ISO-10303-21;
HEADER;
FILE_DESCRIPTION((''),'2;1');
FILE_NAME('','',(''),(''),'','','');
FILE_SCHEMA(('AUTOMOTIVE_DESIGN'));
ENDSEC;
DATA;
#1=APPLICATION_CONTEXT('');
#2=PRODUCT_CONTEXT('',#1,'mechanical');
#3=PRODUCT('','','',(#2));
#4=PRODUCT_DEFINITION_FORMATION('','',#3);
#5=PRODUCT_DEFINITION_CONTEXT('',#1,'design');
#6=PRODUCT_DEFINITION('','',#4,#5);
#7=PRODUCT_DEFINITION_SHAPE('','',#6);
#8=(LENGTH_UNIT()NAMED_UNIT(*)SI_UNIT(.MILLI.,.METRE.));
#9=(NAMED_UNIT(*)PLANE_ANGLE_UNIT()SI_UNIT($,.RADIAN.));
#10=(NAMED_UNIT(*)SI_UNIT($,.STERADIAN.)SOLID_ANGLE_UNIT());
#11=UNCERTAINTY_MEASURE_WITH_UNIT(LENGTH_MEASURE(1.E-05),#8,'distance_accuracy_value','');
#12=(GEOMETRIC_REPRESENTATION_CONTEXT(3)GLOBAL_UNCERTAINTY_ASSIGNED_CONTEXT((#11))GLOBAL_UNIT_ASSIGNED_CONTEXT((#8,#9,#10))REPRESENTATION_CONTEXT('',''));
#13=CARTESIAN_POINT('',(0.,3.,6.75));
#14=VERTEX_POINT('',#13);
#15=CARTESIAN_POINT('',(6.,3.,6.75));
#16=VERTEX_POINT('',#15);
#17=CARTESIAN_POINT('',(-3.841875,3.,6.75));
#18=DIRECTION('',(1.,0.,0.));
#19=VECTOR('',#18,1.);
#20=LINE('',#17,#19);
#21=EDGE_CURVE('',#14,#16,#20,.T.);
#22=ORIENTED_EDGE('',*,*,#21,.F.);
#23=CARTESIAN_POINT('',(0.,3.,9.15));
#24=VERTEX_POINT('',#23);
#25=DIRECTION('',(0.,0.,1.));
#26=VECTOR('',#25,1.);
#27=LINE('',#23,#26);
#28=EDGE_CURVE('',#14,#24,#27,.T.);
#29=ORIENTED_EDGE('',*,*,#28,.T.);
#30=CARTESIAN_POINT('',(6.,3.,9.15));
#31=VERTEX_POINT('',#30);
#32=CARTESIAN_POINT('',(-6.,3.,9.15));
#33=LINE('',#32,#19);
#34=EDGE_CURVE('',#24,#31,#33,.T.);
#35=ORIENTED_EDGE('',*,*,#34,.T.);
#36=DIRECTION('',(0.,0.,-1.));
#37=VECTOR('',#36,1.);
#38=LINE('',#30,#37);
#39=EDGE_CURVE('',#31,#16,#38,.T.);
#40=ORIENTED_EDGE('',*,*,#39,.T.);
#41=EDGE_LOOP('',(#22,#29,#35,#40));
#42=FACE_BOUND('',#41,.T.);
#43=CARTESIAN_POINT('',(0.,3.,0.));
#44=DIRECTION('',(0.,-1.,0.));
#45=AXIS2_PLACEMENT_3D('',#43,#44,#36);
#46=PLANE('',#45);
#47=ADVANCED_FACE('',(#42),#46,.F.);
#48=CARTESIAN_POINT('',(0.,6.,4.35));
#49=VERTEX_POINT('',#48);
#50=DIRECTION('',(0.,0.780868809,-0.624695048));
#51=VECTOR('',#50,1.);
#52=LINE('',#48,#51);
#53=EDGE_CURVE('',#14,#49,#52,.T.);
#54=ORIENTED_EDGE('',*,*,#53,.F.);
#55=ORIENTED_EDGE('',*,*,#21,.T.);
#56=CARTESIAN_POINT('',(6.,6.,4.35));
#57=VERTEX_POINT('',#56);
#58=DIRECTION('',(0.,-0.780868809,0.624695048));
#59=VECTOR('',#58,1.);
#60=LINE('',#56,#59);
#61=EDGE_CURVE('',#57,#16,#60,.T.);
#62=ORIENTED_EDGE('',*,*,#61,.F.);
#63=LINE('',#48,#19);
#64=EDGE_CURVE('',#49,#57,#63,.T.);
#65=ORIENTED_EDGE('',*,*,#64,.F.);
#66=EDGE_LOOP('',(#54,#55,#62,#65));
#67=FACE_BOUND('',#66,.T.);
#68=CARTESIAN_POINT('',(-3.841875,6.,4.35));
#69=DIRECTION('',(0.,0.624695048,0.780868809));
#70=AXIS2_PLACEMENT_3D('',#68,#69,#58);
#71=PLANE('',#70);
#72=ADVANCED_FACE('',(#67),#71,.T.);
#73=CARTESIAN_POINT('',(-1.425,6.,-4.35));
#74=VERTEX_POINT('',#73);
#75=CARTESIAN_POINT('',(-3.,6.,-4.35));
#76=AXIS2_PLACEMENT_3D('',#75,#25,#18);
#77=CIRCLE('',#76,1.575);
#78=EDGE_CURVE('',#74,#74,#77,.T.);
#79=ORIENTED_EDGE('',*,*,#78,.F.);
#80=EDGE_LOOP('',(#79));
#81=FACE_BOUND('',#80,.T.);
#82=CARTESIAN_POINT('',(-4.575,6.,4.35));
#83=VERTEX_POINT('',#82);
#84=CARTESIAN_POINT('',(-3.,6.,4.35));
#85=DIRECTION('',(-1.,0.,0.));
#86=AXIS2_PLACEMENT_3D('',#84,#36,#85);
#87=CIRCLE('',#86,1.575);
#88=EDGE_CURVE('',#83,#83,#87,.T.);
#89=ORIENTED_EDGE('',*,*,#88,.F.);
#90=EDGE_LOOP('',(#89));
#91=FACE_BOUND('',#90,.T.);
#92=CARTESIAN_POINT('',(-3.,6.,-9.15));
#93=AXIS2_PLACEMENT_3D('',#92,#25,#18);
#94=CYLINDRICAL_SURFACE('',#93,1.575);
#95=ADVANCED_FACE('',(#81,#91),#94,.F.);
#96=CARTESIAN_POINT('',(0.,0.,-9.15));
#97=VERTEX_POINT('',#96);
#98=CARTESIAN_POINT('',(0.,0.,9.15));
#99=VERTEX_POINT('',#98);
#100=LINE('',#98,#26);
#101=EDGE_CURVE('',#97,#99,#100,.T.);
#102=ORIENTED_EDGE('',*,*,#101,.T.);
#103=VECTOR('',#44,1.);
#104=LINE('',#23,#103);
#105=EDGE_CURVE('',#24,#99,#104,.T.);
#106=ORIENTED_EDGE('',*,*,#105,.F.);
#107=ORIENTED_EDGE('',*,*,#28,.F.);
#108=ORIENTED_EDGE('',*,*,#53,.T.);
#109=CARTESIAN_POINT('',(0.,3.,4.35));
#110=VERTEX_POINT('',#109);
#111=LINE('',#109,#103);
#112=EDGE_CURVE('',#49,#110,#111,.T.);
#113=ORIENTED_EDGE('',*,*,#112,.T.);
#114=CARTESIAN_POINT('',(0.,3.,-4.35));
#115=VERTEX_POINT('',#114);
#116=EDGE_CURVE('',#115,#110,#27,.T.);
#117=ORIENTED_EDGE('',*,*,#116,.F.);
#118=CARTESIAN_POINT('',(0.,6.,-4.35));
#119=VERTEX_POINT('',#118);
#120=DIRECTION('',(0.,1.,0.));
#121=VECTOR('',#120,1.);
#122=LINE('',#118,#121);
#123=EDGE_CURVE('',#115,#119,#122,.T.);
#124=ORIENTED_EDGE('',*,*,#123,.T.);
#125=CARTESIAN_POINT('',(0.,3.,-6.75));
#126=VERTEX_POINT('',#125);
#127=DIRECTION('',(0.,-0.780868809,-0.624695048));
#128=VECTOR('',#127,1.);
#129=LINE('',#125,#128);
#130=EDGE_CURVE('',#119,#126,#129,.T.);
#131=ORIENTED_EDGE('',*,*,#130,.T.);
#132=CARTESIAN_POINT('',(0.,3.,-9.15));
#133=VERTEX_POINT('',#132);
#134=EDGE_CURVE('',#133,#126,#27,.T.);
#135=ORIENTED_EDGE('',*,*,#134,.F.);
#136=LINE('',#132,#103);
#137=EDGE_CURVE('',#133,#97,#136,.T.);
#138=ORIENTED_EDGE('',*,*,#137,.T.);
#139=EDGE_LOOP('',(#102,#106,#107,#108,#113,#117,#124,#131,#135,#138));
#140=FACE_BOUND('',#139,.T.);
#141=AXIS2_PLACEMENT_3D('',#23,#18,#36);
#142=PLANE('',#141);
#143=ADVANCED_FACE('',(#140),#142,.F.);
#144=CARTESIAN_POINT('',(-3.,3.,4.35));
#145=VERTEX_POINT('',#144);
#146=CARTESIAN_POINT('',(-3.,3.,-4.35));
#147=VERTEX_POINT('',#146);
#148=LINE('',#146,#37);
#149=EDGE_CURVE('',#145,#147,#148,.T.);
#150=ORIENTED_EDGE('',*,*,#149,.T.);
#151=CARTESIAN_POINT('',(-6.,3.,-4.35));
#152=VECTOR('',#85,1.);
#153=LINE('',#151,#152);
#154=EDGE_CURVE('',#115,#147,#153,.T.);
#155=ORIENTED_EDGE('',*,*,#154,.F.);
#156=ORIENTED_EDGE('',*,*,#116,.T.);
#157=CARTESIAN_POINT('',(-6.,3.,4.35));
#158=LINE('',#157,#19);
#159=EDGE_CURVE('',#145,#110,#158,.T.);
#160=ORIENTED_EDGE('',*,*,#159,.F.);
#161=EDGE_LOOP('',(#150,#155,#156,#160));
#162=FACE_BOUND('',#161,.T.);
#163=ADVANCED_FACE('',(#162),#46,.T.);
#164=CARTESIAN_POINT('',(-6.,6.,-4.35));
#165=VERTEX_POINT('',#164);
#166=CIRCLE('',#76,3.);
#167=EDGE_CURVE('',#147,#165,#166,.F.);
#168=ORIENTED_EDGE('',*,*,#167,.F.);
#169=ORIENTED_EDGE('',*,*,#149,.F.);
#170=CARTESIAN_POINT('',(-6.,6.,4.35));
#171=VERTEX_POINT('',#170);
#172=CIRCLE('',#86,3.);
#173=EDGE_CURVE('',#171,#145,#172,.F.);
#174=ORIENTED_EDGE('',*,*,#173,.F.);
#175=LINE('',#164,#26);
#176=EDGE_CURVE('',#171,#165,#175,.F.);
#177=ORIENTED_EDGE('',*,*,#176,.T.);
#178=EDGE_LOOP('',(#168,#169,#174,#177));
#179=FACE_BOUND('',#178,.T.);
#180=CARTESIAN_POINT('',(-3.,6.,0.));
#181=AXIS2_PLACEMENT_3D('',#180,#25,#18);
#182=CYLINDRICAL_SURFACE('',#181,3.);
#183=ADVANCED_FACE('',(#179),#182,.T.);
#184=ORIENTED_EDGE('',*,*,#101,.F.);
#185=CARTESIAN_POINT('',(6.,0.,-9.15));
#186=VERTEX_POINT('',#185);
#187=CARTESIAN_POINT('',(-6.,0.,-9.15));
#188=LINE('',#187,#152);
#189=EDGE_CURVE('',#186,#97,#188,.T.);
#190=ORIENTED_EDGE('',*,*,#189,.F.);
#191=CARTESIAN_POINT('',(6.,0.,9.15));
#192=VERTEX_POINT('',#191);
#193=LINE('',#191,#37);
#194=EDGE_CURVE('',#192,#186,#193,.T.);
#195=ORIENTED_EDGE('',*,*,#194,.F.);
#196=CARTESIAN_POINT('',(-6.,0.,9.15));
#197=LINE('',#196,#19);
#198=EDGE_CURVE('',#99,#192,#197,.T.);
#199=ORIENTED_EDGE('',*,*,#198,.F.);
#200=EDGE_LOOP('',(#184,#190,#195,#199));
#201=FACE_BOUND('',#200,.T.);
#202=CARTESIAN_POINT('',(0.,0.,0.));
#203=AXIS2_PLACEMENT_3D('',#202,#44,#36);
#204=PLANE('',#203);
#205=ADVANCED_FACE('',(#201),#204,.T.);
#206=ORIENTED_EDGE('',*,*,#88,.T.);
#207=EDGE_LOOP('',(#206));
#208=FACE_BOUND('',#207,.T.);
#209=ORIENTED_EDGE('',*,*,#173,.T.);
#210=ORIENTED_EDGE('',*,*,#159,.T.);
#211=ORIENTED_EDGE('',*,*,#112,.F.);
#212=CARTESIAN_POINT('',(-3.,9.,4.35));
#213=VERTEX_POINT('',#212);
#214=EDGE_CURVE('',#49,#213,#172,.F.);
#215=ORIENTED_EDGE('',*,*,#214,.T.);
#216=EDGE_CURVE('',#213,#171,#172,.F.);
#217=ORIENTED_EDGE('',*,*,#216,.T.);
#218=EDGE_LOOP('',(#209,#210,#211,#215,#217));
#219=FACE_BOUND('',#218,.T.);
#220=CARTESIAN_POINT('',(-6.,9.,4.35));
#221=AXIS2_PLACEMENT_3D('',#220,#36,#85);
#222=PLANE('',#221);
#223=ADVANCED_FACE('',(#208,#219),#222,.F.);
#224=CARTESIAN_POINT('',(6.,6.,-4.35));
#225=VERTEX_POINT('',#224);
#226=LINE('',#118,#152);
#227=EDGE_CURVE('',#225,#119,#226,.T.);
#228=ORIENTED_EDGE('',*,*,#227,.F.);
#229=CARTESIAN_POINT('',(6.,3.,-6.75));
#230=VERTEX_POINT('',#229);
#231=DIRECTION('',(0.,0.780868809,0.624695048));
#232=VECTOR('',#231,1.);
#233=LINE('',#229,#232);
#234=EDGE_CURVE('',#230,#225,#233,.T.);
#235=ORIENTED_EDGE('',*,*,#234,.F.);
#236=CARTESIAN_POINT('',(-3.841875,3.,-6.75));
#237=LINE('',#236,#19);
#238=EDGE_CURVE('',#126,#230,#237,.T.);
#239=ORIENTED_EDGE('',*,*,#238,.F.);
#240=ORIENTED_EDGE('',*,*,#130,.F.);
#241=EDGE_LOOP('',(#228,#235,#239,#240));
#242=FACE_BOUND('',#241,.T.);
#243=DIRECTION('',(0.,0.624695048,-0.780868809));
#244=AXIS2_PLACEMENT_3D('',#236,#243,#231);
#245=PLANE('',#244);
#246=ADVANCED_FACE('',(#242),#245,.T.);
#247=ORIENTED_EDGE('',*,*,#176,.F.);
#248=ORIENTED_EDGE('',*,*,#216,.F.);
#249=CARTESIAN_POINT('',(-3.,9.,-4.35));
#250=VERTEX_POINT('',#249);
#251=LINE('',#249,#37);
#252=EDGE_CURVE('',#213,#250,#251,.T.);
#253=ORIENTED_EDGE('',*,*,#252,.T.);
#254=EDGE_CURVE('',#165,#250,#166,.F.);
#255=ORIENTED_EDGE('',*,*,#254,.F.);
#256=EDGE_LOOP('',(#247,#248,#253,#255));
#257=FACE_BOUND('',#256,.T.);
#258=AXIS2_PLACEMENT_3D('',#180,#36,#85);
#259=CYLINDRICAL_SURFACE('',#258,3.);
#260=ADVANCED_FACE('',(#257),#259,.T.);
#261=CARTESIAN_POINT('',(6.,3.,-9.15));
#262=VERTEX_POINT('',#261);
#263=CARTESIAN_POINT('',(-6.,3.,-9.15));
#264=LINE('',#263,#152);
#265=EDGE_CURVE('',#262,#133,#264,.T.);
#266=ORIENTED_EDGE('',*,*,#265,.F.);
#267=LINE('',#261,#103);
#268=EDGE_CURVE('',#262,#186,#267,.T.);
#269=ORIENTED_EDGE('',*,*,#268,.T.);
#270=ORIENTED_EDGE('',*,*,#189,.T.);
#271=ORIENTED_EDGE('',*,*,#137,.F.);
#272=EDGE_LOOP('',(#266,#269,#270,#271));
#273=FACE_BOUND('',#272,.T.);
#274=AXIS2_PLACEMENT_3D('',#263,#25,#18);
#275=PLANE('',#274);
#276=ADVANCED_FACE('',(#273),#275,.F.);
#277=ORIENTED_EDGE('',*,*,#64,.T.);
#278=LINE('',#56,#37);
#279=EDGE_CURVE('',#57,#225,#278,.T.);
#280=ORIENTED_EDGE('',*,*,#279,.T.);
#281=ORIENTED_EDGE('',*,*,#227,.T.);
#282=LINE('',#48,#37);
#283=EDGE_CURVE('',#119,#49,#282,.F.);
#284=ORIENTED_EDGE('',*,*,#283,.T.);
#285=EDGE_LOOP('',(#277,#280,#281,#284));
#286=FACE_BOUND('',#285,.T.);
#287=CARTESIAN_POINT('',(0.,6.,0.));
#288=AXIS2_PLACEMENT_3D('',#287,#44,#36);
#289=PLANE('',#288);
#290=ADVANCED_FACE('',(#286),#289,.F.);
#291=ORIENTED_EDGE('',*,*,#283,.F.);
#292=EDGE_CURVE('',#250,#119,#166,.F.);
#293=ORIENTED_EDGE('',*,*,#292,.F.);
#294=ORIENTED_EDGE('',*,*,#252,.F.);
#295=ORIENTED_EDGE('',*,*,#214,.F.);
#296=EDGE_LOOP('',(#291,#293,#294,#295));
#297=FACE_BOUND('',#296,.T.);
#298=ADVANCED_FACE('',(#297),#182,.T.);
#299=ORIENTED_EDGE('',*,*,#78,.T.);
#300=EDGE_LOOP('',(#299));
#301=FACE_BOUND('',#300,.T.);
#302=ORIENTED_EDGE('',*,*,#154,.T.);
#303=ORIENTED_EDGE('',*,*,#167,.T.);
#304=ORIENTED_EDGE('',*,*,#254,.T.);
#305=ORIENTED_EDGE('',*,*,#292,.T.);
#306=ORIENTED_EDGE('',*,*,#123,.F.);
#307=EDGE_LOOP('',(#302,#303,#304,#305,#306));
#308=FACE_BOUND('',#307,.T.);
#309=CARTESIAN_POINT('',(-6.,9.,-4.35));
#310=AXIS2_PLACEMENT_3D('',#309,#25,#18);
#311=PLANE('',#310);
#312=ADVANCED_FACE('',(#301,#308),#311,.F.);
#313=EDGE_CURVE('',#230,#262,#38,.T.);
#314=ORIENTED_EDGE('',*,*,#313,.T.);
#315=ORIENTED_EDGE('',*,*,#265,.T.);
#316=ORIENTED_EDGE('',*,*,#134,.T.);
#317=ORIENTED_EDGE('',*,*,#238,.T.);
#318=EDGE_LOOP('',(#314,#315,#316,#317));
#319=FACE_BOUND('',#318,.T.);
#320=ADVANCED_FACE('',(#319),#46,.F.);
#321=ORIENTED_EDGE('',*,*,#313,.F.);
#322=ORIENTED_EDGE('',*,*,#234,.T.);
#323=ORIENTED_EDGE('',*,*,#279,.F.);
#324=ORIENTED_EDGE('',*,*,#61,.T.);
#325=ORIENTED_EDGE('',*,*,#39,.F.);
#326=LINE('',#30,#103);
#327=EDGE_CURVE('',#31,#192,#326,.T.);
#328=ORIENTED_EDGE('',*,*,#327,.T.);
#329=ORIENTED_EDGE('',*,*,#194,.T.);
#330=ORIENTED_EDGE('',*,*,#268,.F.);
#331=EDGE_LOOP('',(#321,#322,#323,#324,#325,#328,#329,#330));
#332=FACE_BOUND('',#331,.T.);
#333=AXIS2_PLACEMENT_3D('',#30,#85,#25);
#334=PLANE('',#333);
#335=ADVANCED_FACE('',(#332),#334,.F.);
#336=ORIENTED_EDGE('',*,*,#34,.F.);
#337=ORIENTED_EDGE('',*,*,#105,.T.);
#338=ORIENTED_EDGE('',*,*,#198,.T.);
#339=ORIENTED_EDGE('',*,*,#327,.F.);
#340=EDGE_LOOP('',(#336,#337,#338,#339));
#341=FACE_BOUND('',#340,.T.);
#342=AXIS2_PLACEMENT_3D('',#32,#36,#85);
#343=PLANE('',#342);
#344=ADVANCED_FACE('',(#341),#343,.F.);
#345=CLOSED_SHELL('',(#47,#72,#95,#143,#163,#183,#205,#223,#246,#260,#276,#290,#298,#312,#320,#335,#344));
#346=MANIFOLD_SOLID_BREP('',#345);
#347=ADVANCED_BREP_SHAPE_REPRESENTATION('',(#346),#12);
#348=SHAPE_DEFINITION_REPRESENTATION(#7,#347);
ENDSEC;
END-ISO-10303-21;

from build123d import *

# Parameters (mm, degrees)
SKETCH1_W           = 12
SKETCH1_H           = 18.3
BOSS_EXTRUDE1_DEPTH = 3
SKETCH2_W           = 6
SKETCH2_H           = 8.7
BOSS_EXTRUDE2_DEPTH = 6
SKETCH3_R           = 1.575
CUT_EXTRUDE1_DEPTH  = 22.257704486
FILLET1_R           = 3
SKETCH4_W           = 6
SKETCH4_H           = 8.7
BOSS_EXTRUDE3_DEPTH = 3
SKETCH5_W           = 6
SKETCH5_H           = 18.3
CUT_EXTRUDE2_DEPTH  = 3
FILLET2_R           = 3
BOSS_EXTRUDE4_DEPTH = 6


with BuildPart() as part:
    # Sketch1 → Boss-Extrude1 (new body)
    with BuildSketch(Plane(origin=(0, 0, 0), x_dir=(1, 0, 0), z_dir=(0, 1, 0))):
        Rectangle(SKETCH1_W, SKETCH1_H)
    extrude(amount=BOSS_EXTRUDE1_DEPTH)

    # Sketch2 → Boss-Extrude2 (add)
    with BuildSketch(Plane(origin=(0, 3, 0), x_dir=(1, 0, 0), z_dir=(0, 1, 0))):
        with Locations((-3, 0)):
            Rectangle(SKETCH2_W, SKETCH2_H)
    extrude(amount=BOSS_EXTRUDE2_DEPTH)

    # Sketch3 → Cut-Extrude1 (cut, through all)
    with BuildSketch(Plane.XY.offset(9.15)):
        with Locations((-3, 6)):
            Circle(SKETCH3_R)
    extrude(amount=-CUT_EXTRUDE1_DEPTH, mode=Mode.SUBTRACT)

    # Fillet1
    fillet1_edges = [part.edges().sort_by_distance(p)[0] for p in [
        (-6, 9, 0),
        (0, 9, 0),
    ]]
    fillet(fillet1_edges, radius=FILLET1_R - 0.0001)  # a hair under: the kernel refuses the full size

    # Sketch4 → Boss-Extrude3 (add)
    with BuildSketch(Plane(origin=(0, 3, 0), x_dir=(1, 0, 0), z_dir=(0, 1, 0))):
        with Locations((3, 0)):
            Rectangle(SKETCH4_W, SKETCH4_H)
    extrude(amount=BOSS_EXTRUDE3_DEPTH)

    # Sketch5 → Cut-Extrude2 (cut)
    with BuildSketch(Plane.XZ):
        with Locations((-3, 0)):
            Rectangle(SKETCH5_W, SKETCH5_H)
    extrude(amount=-CUT_EXTRUDE2_DEPTH, mode=Mode.SUBTRACT)

    # Fillet2
    fillet2_edges = [part.edges().sort_by_distance(p)[0] for p in [
        (-6, 3, 0),
    ]]
    fillet(fillet2_edges, radius=FILLET2_R)

    # Sketch6 → Boss-Extrude4 (add)
    with BuildSketch(Plane(origin=(6, 0, 0), x_dir=(0, 0, -1), z_dir=(1, 0, 0))):
        Polygon((4.35, 3), (6.75, 3), (4.35, 6), align=None)
        Polygon((-4.35, 3), (-4.35, 6), (-6.75, 3), align=None)
    extrude(amount=-BOSS_EXTRUDE4_DEPTH)


solid = part.part
